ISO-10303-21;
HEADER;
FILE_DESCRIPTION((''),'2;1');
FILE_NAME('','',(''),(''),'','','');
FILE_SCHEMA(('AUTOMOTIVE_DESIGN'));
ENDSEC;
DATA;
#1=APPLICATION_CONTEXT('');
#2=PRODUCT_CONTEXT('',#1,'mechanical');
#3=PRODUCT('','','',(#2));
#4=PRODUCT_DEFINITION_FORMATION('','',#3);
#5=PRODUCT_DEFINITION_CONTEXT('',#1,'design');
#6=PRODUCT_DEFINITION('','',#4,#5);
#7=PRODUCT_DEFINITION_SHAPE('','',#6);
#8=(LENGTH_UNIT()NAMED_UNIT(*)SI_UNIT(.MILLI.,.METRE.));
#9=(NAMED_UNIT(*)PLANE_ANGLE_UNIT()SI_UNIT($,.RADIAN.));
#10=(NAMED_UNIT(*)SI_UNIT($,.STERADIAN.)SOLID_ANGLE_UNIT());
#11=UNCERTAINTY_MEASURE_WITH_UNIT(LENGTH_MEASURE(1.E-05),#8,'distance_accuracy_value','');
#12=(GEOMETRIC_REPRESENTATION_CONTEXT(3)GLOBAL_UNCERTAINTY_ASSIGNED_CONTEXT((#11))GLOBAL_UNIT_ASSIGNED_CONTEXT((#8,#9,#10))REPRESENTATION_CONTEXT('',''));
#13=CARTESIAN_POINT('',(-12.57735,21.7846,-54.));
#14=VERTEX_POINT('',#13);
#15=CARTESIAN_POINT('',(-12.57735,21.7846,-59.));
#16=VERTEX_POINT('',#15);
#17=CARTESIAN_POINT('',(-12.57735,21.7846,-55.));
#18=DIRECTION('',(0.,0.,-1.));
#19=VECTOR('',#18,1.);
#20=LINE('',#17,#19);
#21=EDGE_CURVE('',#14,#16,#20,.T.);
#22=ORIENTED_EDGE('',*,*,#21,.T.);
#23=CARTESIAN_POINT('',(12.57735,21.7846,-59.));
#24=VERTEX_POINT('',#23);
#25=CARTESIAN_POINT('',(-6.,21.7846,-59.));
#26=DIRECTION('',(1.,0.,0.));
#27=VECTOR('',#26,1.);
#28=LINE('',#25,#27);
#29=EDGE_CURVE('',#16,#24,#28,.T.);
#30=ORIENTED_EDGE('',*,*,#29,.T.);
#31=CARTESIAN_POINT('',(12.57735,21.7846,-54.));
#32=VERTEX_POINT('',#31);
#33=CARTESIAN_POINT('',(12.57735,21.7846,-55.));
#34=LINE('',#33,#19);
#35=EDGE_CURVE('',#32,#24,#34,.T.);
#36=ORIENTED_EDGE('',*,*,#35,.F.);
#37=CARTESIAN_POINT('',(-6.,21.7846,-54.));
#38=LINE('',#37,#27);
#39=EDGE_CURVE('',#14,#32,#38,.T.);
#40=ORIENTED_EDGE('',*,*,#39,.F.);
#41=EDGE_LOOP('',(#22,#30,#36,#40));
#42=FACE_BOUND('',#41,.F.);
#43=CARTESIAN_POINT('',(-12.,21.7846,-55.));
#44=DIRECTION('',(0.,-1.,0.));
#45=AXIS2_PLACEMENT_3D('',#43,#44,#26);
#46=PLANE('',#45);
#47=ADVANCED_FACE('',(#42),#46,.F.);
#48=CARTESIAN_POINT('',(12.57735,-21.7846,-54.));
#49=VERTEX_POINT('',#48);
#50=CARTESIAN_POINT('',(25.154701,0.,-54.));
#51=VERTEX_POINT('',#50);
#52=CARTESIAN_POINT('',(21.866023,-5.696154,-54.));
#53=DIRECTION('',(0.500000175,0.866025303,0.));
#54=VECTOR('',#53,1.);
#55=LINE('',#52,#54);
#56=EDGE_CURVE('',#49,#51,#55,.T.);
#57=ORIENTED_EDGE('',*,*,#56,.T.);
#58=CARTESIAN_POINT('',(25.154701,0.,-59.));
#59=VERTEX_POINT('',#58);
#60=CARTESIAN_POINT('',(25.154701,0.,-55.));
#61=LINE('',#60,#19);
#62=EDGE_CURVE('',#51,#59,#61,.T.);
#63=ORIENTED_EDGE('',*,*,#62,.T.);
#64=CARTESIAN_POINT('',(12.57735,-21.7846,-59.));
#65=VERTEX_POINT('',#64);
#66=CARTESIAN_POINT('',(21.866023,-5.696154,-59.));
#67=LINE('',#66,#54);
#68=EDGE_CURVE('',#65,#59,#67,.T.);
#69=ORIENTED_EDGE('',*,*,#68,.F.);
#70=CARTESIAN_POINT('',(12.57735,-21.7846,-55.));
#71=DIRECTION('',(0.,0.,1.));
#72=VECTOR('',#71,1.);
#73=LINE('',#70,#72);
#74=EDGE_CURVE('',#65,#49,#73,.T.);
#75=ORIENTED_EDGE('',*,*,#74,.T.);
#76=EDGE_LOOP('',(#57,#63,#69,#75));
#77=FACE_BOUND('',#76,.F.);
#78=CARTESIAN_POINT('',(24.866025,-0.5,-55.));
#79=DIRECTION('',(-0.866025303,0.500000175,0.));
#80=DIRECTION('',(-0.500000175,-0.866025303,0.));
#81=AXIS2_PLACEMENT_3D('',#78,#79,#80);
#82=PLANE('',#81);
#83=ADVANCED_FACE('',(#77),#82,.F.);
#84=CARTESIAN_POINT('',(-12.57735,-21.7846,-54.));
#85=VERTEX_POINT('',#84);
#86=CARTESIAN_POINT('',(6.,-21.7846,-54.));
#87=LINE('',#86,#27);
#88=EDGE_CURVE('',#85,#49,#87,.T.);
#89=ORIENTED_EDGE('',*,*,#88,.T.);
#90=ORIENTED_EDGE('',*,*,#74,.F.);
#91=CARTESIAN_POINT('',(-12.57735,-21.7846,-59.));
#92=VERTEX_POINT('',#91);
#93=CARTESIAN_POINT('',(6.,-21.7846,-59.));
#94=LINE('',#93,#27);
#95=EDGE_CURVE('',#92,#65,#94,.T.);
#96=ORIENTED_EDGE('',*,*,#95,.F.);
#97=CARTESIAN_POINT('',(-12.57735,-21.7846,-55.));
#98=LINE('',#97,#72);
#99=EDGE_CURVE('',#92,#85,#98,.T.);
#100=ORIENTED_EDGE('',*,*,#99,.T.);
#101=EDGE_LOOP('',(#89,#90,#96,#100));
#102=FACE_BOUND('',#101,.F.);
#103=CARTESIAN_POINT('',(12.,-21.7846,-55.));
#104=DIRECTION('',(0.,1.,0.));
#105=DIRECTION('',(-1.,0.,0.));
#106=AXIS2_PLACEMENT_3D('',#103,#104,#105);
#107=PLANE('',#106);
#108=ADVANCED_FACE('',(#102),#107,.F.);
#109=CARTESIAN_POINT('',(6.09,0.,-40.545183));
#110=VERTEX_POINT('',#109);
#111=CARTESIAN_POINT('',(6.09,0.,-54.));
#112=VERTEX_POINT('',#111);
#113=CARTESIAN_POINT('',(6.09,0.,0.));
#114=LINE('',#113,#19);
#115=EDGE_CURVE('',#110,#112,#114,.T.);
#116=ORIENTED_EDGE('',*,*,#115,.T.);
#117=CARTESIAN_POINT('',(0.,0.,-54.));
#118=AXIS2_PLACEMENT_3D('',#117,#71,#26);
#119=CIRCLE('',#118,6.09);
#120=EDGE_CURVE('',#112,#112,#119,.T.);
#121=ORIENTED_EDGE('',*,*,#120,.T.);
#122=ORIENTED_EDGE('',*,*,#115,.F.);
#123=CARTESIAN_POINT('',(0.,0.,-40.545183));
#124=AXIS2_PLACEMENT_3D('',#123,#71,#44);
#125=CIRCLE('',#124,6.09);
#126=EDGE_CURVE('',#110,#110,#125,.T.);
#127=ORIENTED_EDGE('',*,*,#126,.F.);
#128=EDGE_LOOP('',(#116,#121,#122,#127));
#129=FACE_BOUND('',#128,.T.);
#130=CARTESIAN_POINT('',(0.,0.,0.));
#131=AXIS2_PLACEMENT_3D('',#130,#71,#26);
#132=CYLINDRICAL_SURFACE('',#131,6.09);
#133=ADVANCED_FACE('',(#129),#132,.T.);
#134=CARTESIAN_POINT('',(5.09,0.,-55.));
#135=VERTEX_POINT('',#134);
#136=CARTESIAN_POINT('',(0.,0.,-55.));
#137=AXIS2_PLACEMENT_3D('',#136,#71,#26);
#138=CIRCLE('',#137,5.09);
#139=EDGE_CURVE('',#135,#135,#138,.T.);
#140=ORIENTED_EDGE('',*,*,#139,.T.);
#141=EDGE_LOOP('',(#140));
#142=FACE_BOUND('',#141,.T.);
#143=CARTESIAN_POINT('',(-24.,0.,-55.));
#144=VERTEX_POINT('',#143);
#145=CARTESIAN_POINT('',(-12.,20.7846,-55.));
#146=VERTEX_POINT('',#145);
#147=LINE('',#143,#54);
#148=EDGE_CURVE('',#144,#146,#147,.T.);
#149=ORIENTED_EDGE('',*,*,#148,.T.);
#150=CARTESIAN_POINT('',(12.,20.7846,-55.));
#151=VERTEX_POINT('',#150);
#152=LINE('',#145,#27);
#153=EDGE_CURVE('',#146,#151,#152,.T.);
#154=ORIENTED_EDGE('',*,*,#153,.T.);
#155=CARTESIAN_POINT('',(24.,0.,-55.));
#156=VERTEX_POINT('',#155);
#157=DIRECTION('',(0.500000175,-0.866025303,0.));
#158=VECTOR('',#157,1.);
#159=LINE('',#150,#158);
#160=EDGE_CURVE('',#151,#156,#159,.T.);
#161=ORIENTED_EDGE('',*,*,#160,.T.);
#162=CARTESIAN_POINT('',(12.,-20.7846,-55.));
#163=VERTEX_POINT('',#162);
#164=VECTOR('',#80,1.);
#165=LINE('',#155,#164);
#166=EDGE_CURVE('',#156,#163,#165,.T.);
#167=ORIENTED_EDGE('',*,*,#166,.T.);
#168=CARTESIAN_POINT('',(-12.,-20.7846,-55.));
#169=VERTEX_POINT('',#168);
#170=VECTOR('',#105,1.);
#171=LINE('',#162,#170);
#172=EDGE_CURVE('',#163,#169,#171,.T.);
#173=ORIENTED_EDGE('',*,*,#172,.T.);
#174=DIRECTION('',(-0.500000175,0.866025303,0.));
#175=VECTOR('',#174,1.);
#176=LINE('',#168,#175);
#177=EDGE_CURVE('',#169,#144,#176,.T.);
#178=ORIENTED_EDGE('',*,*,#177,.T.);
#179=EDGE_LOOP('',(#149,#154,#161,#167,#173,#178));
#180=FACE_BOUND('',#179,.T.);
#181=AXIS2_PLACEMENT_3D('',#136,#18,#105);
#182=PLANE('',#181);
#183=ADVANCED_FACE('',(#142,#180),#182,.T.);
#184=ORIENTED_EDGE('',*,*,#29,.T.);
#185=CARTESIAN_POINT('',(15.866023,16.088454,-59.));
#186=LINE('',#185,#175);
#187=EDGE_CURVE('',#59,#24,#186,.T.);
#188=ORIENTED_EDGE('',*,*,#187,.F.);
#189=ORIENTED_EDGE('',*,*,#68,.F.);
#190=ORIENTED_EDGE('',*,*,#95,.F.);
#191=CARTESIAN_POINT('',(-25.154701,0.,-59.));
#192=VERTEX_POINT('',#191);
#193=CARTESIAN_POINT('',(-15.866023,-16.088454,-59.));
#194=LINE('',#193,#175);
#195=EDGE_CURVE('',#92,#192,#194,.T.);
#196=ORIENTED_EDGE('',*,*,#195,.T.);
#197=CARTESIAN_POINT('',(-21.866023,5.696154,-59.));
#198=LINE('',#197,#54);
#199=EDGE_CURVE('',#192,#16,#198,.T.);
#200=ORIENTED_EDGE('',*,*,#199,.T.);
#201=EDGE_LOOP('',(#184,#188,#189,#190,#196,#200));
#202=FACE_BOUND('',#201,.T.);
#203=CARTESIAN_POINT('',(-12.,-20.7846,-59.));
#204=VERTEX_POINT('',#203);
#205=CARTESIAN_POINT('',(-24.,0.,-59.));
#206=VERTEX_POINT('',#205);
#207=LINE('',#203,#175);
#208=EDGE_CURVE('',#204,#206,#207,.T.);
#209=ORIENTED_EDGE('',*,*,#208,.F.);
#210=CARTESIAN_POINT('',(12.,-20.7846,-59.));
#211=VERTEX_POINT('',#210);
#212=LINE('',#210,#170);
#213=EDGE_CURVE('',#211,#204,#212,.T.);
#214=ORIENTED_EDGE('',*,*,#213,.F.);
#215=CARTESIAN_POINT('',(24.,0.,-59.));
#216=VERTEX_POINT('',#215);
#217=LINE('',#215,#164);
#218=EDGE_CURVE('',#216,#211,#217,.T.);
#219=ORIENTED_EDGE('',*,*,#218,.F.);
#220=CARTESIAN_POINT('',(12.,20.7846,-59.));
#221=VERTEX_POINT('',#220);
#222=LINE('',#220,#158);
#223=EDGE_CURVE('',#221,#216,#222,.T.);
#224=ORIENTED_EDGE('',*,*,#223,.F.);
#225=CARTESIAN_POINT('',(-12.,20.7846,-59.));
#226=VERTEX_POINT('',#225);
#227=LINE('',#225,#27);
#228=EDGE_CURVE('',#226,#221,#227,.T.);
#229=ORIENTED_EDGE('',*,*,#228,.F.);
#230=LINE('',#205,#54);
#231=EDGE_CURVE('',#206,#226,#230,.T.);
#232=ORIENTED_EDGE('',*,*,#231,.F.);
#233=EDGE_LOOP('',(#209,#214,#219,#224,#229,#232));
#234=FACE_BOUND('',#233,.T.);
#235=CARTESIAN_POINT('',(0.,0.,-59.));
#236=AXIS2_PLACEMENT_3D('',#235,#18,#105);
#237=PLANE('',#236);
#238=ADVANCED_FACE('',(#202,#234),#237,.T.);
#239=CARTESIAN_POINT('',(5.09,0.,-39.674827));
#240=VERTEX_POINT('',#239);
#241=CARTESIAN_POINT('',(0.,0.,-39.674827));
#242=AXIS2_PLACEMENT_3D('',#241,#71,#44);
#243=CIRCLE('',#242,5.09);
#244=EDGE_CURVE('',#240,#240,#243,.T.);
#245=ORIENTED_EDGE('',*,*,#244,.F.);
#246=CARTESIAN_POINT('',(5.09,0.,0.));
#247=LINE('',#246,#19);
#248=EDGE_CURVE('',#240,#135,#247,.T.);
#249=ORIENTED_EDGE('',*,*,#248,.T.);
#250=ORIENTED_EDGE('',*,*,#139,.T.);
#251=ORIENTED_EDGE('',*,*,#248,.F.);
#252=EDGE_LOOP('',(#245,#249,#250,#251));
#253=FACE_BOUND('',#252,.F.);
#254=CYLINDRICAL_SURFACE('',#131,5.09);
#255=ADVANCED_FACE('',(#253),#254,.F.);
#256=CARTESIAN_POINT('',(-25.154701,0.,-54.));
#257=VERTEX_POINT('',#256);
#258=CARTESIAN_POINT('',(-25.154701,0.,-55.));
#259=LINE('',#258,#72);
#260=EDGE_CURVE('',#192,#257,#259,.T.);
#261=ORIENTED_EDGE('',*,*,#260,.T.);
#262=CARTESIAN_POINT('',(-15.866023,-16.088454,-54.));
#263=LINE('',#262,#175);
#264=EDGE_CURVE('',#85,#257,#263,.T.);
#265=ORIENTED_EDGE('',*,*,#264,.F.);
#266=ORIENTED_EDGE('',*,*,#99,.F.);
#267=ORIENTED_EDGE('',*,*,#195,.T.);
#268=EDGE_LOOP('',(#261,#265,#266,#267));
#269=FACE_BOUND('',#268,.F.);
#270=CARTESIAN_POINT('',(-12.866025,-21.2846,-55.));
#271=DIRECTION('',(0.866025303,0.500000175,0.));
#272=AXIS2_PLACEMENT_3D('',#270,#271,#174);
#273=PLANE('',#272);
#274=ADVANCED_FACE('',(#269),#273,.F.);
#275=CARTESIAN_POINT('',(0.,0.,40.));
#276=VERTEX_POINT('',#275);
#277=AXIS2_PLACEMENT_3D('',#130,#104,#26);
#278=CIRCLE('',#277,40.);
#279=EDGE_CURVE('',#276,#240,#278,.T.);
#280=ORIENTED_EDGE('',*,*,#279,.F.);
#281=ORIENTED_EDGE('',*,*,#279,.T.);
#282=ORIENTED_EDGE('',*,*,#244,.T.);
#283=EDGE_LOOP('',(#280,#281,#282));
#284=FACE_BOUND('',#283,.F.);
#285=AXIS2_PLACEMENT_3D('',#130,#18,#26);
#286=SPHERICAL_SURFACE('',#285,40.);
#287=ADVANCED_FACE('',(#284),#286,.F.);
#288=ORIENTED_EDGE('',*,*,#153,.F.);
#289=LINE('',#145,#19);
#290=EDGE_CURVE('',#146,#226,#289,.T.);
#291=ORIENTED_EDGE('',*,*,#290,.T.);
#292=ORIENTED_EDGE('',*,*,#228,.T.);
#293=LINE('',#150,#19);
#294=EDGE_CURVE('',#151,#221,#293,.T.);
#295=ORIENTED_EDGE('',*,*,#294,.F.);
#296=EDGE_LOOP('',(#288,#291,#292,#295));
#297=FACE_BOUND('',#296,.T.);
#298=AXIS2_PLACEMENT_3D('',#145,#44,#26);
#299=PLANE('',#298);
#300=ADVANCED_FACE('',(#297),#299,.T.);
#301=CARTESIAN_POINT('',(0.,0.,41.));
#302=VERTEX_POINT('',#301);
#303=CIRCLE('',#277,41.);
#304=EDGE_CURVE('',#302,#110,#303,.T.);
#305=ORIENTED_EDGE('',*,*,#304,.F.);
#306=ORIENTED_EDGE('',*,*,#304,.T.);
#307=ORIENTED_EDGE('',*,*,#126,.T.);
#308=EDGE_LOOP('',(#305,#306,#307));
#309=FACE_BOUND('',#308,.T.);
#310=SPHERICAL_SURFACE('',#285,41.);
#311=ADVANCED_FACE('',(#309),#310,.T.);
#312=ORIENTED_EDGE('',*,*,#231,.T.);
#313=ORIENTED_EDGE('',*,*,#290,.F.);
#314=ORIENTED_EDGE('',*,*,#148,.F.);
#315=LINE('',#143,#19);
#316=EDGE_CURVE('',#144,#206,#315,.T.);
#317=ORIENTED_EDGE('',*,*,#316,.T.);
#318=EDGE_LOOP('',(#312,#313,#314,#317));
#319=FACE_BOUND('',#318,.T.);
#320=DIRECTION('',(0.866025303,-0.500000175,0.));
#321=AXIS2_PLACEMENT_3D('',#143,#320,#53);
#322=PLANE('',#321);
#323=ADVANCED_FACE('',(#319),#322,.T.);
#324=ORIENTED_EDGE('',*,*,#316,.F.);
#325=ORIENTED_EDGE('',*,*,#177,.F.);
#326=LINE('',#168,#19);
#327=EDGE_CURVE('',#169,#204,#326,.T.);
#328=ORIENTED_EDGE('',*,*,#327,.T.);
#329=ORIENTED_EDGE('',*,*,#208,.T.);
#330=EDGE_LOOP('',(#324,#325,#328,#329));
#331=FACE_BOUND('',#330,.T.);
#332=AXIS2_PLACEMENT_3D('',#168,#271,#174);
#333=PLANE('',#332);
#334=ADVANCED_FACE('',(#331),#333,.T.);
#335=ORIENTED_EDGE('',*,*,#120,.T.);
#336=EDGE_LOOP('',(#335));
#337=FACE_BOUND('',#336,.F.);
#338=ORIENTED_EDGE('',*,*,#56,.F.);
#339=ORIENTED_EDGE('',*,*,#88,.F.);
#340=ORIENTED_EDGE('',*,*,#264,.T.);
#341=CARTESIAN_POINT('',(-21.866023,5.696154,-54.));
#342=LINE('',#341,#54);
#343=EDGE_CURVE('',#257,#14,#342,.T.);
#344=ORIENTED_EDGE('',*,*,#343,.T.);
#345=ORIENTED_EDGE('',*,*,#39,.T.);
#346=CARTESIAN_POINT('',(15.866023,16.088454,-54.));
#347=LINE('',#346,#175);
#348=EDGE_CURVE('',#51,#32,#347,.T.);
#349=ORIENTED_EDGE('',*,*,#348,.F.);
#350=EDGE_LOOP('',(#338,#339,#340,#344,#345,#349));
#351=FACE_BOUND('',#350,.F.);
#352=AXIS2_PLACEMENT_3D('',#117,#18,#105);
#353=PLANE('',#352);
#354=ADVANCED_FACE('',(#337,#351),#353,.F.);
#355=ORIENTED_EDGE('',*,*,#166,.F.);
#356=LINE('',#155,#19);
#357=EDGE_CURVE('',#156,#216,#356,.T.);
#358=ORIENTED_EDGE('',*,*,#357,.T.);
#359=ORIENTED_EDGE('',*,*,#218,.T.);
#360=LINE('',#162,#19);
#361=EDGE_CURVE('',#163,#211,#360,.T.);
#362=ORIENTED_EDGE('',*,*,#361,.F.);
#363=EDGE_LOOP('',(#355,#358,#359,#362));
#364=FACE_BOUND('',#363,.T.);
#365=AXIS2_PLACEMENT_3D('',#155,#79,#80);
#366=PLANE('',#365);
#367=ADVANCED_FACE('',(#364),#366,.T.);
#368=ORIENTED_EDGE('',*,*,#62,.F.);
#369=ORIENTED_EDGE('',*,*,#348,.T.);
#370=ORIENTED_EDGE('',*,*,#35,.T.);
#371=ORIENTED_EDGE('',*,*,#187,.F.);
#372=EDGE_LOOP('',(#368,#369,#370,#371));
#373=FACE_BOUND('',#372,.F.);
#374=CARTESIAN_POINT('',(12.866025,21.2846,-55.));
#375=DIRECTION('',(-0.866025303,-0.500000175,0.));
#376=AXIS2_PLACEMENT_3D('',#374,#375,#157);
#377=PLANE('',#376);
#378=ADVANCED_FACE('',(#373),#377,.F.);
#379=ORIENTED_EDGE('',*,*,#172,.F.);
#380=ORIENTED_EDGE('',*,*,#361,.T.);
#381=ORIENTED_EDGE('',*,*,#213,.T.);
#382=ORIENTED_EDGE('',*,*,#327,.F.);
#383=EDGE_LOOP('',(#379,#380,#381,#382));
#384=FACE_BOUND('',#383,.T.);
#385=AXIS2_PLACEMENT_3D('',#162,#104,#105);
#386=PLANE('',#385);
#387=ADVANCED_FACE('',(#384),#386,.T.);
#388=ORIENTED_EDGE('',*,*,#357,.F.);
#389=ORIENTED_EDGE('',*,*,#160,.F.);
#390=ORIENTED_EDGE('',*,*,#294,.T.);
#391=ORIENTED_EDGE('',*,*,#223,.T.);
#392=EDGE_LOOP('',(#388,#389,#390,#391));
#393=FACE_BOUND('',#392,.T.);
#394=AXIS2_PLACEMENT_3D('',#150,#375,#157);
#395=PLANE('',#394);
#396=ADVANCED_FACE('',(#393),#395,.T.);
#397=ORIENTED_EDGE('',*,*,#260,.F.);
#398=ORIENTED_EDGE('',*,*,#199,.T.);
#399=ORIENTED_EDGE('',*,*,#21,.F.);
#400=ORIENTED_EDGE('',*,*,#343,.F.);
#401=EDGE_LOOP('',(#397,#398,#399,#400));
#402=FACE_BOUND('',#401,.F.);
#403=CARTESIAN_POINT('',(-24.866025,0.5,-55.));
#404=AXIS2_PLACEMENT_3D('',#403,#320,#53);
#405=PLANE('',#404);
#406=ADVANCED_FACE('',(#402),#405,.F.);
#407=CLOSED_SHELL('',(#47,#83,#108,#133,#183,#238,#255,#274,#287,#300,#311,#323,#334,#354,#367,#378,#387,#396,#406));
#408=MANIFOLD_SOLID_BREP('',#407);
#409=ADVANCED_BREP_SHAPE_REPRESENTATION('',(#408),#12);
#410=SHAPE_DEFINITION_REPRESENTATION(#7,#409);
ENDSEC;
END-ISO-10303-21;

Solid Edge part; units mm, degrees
sketch "Sketch1" plane through (0, 0, 0) normal (0, -1, 0) x (1, 0, 0)
  line L0 (0, 40) -> (0, -40)
  arc A0 (0, 40) -> (0, -40) centre (0, 0) cw
revolve "RevolvedProtrusion1" add sketch "Sketch1" angle 360 about axis through (0, 0, 45) along (0, 0, -1)
sketch "Sketch2" plane through (0, 0, 0) normal (0, 0, 1) x (1, 0, 0)
  circle A0 centre (0, 0) radius 5.09
extrude "Protrusion1" add sketch "Sketch2" against normal blind 55
sketch "Sketch3" plane through (0, 0, -55) normal (0, 0, -1) x (1, 0, 0)
  line L0 (-24, 0) -> (-12, -20.7846)
  line L1 (-12, -20.7846) -> (12, -20.7846)
  line L2 (12, -20.7846) -> (24, 0)
  line L3 (24, 0) -> (12, 20.7846)
  line L4 (12, 20.7846) -> (-12, 20.7846)
  line L5 (-12, 20.7846) -> (-24, 0)
extrude "ExtrudedProtrusion_3" add sketch "Sketch3" along normal blind 4
shell "Thinwall_1" thickness 0 removed faces 1 at (16.48, 0.4157, -59) outside thickness 1
